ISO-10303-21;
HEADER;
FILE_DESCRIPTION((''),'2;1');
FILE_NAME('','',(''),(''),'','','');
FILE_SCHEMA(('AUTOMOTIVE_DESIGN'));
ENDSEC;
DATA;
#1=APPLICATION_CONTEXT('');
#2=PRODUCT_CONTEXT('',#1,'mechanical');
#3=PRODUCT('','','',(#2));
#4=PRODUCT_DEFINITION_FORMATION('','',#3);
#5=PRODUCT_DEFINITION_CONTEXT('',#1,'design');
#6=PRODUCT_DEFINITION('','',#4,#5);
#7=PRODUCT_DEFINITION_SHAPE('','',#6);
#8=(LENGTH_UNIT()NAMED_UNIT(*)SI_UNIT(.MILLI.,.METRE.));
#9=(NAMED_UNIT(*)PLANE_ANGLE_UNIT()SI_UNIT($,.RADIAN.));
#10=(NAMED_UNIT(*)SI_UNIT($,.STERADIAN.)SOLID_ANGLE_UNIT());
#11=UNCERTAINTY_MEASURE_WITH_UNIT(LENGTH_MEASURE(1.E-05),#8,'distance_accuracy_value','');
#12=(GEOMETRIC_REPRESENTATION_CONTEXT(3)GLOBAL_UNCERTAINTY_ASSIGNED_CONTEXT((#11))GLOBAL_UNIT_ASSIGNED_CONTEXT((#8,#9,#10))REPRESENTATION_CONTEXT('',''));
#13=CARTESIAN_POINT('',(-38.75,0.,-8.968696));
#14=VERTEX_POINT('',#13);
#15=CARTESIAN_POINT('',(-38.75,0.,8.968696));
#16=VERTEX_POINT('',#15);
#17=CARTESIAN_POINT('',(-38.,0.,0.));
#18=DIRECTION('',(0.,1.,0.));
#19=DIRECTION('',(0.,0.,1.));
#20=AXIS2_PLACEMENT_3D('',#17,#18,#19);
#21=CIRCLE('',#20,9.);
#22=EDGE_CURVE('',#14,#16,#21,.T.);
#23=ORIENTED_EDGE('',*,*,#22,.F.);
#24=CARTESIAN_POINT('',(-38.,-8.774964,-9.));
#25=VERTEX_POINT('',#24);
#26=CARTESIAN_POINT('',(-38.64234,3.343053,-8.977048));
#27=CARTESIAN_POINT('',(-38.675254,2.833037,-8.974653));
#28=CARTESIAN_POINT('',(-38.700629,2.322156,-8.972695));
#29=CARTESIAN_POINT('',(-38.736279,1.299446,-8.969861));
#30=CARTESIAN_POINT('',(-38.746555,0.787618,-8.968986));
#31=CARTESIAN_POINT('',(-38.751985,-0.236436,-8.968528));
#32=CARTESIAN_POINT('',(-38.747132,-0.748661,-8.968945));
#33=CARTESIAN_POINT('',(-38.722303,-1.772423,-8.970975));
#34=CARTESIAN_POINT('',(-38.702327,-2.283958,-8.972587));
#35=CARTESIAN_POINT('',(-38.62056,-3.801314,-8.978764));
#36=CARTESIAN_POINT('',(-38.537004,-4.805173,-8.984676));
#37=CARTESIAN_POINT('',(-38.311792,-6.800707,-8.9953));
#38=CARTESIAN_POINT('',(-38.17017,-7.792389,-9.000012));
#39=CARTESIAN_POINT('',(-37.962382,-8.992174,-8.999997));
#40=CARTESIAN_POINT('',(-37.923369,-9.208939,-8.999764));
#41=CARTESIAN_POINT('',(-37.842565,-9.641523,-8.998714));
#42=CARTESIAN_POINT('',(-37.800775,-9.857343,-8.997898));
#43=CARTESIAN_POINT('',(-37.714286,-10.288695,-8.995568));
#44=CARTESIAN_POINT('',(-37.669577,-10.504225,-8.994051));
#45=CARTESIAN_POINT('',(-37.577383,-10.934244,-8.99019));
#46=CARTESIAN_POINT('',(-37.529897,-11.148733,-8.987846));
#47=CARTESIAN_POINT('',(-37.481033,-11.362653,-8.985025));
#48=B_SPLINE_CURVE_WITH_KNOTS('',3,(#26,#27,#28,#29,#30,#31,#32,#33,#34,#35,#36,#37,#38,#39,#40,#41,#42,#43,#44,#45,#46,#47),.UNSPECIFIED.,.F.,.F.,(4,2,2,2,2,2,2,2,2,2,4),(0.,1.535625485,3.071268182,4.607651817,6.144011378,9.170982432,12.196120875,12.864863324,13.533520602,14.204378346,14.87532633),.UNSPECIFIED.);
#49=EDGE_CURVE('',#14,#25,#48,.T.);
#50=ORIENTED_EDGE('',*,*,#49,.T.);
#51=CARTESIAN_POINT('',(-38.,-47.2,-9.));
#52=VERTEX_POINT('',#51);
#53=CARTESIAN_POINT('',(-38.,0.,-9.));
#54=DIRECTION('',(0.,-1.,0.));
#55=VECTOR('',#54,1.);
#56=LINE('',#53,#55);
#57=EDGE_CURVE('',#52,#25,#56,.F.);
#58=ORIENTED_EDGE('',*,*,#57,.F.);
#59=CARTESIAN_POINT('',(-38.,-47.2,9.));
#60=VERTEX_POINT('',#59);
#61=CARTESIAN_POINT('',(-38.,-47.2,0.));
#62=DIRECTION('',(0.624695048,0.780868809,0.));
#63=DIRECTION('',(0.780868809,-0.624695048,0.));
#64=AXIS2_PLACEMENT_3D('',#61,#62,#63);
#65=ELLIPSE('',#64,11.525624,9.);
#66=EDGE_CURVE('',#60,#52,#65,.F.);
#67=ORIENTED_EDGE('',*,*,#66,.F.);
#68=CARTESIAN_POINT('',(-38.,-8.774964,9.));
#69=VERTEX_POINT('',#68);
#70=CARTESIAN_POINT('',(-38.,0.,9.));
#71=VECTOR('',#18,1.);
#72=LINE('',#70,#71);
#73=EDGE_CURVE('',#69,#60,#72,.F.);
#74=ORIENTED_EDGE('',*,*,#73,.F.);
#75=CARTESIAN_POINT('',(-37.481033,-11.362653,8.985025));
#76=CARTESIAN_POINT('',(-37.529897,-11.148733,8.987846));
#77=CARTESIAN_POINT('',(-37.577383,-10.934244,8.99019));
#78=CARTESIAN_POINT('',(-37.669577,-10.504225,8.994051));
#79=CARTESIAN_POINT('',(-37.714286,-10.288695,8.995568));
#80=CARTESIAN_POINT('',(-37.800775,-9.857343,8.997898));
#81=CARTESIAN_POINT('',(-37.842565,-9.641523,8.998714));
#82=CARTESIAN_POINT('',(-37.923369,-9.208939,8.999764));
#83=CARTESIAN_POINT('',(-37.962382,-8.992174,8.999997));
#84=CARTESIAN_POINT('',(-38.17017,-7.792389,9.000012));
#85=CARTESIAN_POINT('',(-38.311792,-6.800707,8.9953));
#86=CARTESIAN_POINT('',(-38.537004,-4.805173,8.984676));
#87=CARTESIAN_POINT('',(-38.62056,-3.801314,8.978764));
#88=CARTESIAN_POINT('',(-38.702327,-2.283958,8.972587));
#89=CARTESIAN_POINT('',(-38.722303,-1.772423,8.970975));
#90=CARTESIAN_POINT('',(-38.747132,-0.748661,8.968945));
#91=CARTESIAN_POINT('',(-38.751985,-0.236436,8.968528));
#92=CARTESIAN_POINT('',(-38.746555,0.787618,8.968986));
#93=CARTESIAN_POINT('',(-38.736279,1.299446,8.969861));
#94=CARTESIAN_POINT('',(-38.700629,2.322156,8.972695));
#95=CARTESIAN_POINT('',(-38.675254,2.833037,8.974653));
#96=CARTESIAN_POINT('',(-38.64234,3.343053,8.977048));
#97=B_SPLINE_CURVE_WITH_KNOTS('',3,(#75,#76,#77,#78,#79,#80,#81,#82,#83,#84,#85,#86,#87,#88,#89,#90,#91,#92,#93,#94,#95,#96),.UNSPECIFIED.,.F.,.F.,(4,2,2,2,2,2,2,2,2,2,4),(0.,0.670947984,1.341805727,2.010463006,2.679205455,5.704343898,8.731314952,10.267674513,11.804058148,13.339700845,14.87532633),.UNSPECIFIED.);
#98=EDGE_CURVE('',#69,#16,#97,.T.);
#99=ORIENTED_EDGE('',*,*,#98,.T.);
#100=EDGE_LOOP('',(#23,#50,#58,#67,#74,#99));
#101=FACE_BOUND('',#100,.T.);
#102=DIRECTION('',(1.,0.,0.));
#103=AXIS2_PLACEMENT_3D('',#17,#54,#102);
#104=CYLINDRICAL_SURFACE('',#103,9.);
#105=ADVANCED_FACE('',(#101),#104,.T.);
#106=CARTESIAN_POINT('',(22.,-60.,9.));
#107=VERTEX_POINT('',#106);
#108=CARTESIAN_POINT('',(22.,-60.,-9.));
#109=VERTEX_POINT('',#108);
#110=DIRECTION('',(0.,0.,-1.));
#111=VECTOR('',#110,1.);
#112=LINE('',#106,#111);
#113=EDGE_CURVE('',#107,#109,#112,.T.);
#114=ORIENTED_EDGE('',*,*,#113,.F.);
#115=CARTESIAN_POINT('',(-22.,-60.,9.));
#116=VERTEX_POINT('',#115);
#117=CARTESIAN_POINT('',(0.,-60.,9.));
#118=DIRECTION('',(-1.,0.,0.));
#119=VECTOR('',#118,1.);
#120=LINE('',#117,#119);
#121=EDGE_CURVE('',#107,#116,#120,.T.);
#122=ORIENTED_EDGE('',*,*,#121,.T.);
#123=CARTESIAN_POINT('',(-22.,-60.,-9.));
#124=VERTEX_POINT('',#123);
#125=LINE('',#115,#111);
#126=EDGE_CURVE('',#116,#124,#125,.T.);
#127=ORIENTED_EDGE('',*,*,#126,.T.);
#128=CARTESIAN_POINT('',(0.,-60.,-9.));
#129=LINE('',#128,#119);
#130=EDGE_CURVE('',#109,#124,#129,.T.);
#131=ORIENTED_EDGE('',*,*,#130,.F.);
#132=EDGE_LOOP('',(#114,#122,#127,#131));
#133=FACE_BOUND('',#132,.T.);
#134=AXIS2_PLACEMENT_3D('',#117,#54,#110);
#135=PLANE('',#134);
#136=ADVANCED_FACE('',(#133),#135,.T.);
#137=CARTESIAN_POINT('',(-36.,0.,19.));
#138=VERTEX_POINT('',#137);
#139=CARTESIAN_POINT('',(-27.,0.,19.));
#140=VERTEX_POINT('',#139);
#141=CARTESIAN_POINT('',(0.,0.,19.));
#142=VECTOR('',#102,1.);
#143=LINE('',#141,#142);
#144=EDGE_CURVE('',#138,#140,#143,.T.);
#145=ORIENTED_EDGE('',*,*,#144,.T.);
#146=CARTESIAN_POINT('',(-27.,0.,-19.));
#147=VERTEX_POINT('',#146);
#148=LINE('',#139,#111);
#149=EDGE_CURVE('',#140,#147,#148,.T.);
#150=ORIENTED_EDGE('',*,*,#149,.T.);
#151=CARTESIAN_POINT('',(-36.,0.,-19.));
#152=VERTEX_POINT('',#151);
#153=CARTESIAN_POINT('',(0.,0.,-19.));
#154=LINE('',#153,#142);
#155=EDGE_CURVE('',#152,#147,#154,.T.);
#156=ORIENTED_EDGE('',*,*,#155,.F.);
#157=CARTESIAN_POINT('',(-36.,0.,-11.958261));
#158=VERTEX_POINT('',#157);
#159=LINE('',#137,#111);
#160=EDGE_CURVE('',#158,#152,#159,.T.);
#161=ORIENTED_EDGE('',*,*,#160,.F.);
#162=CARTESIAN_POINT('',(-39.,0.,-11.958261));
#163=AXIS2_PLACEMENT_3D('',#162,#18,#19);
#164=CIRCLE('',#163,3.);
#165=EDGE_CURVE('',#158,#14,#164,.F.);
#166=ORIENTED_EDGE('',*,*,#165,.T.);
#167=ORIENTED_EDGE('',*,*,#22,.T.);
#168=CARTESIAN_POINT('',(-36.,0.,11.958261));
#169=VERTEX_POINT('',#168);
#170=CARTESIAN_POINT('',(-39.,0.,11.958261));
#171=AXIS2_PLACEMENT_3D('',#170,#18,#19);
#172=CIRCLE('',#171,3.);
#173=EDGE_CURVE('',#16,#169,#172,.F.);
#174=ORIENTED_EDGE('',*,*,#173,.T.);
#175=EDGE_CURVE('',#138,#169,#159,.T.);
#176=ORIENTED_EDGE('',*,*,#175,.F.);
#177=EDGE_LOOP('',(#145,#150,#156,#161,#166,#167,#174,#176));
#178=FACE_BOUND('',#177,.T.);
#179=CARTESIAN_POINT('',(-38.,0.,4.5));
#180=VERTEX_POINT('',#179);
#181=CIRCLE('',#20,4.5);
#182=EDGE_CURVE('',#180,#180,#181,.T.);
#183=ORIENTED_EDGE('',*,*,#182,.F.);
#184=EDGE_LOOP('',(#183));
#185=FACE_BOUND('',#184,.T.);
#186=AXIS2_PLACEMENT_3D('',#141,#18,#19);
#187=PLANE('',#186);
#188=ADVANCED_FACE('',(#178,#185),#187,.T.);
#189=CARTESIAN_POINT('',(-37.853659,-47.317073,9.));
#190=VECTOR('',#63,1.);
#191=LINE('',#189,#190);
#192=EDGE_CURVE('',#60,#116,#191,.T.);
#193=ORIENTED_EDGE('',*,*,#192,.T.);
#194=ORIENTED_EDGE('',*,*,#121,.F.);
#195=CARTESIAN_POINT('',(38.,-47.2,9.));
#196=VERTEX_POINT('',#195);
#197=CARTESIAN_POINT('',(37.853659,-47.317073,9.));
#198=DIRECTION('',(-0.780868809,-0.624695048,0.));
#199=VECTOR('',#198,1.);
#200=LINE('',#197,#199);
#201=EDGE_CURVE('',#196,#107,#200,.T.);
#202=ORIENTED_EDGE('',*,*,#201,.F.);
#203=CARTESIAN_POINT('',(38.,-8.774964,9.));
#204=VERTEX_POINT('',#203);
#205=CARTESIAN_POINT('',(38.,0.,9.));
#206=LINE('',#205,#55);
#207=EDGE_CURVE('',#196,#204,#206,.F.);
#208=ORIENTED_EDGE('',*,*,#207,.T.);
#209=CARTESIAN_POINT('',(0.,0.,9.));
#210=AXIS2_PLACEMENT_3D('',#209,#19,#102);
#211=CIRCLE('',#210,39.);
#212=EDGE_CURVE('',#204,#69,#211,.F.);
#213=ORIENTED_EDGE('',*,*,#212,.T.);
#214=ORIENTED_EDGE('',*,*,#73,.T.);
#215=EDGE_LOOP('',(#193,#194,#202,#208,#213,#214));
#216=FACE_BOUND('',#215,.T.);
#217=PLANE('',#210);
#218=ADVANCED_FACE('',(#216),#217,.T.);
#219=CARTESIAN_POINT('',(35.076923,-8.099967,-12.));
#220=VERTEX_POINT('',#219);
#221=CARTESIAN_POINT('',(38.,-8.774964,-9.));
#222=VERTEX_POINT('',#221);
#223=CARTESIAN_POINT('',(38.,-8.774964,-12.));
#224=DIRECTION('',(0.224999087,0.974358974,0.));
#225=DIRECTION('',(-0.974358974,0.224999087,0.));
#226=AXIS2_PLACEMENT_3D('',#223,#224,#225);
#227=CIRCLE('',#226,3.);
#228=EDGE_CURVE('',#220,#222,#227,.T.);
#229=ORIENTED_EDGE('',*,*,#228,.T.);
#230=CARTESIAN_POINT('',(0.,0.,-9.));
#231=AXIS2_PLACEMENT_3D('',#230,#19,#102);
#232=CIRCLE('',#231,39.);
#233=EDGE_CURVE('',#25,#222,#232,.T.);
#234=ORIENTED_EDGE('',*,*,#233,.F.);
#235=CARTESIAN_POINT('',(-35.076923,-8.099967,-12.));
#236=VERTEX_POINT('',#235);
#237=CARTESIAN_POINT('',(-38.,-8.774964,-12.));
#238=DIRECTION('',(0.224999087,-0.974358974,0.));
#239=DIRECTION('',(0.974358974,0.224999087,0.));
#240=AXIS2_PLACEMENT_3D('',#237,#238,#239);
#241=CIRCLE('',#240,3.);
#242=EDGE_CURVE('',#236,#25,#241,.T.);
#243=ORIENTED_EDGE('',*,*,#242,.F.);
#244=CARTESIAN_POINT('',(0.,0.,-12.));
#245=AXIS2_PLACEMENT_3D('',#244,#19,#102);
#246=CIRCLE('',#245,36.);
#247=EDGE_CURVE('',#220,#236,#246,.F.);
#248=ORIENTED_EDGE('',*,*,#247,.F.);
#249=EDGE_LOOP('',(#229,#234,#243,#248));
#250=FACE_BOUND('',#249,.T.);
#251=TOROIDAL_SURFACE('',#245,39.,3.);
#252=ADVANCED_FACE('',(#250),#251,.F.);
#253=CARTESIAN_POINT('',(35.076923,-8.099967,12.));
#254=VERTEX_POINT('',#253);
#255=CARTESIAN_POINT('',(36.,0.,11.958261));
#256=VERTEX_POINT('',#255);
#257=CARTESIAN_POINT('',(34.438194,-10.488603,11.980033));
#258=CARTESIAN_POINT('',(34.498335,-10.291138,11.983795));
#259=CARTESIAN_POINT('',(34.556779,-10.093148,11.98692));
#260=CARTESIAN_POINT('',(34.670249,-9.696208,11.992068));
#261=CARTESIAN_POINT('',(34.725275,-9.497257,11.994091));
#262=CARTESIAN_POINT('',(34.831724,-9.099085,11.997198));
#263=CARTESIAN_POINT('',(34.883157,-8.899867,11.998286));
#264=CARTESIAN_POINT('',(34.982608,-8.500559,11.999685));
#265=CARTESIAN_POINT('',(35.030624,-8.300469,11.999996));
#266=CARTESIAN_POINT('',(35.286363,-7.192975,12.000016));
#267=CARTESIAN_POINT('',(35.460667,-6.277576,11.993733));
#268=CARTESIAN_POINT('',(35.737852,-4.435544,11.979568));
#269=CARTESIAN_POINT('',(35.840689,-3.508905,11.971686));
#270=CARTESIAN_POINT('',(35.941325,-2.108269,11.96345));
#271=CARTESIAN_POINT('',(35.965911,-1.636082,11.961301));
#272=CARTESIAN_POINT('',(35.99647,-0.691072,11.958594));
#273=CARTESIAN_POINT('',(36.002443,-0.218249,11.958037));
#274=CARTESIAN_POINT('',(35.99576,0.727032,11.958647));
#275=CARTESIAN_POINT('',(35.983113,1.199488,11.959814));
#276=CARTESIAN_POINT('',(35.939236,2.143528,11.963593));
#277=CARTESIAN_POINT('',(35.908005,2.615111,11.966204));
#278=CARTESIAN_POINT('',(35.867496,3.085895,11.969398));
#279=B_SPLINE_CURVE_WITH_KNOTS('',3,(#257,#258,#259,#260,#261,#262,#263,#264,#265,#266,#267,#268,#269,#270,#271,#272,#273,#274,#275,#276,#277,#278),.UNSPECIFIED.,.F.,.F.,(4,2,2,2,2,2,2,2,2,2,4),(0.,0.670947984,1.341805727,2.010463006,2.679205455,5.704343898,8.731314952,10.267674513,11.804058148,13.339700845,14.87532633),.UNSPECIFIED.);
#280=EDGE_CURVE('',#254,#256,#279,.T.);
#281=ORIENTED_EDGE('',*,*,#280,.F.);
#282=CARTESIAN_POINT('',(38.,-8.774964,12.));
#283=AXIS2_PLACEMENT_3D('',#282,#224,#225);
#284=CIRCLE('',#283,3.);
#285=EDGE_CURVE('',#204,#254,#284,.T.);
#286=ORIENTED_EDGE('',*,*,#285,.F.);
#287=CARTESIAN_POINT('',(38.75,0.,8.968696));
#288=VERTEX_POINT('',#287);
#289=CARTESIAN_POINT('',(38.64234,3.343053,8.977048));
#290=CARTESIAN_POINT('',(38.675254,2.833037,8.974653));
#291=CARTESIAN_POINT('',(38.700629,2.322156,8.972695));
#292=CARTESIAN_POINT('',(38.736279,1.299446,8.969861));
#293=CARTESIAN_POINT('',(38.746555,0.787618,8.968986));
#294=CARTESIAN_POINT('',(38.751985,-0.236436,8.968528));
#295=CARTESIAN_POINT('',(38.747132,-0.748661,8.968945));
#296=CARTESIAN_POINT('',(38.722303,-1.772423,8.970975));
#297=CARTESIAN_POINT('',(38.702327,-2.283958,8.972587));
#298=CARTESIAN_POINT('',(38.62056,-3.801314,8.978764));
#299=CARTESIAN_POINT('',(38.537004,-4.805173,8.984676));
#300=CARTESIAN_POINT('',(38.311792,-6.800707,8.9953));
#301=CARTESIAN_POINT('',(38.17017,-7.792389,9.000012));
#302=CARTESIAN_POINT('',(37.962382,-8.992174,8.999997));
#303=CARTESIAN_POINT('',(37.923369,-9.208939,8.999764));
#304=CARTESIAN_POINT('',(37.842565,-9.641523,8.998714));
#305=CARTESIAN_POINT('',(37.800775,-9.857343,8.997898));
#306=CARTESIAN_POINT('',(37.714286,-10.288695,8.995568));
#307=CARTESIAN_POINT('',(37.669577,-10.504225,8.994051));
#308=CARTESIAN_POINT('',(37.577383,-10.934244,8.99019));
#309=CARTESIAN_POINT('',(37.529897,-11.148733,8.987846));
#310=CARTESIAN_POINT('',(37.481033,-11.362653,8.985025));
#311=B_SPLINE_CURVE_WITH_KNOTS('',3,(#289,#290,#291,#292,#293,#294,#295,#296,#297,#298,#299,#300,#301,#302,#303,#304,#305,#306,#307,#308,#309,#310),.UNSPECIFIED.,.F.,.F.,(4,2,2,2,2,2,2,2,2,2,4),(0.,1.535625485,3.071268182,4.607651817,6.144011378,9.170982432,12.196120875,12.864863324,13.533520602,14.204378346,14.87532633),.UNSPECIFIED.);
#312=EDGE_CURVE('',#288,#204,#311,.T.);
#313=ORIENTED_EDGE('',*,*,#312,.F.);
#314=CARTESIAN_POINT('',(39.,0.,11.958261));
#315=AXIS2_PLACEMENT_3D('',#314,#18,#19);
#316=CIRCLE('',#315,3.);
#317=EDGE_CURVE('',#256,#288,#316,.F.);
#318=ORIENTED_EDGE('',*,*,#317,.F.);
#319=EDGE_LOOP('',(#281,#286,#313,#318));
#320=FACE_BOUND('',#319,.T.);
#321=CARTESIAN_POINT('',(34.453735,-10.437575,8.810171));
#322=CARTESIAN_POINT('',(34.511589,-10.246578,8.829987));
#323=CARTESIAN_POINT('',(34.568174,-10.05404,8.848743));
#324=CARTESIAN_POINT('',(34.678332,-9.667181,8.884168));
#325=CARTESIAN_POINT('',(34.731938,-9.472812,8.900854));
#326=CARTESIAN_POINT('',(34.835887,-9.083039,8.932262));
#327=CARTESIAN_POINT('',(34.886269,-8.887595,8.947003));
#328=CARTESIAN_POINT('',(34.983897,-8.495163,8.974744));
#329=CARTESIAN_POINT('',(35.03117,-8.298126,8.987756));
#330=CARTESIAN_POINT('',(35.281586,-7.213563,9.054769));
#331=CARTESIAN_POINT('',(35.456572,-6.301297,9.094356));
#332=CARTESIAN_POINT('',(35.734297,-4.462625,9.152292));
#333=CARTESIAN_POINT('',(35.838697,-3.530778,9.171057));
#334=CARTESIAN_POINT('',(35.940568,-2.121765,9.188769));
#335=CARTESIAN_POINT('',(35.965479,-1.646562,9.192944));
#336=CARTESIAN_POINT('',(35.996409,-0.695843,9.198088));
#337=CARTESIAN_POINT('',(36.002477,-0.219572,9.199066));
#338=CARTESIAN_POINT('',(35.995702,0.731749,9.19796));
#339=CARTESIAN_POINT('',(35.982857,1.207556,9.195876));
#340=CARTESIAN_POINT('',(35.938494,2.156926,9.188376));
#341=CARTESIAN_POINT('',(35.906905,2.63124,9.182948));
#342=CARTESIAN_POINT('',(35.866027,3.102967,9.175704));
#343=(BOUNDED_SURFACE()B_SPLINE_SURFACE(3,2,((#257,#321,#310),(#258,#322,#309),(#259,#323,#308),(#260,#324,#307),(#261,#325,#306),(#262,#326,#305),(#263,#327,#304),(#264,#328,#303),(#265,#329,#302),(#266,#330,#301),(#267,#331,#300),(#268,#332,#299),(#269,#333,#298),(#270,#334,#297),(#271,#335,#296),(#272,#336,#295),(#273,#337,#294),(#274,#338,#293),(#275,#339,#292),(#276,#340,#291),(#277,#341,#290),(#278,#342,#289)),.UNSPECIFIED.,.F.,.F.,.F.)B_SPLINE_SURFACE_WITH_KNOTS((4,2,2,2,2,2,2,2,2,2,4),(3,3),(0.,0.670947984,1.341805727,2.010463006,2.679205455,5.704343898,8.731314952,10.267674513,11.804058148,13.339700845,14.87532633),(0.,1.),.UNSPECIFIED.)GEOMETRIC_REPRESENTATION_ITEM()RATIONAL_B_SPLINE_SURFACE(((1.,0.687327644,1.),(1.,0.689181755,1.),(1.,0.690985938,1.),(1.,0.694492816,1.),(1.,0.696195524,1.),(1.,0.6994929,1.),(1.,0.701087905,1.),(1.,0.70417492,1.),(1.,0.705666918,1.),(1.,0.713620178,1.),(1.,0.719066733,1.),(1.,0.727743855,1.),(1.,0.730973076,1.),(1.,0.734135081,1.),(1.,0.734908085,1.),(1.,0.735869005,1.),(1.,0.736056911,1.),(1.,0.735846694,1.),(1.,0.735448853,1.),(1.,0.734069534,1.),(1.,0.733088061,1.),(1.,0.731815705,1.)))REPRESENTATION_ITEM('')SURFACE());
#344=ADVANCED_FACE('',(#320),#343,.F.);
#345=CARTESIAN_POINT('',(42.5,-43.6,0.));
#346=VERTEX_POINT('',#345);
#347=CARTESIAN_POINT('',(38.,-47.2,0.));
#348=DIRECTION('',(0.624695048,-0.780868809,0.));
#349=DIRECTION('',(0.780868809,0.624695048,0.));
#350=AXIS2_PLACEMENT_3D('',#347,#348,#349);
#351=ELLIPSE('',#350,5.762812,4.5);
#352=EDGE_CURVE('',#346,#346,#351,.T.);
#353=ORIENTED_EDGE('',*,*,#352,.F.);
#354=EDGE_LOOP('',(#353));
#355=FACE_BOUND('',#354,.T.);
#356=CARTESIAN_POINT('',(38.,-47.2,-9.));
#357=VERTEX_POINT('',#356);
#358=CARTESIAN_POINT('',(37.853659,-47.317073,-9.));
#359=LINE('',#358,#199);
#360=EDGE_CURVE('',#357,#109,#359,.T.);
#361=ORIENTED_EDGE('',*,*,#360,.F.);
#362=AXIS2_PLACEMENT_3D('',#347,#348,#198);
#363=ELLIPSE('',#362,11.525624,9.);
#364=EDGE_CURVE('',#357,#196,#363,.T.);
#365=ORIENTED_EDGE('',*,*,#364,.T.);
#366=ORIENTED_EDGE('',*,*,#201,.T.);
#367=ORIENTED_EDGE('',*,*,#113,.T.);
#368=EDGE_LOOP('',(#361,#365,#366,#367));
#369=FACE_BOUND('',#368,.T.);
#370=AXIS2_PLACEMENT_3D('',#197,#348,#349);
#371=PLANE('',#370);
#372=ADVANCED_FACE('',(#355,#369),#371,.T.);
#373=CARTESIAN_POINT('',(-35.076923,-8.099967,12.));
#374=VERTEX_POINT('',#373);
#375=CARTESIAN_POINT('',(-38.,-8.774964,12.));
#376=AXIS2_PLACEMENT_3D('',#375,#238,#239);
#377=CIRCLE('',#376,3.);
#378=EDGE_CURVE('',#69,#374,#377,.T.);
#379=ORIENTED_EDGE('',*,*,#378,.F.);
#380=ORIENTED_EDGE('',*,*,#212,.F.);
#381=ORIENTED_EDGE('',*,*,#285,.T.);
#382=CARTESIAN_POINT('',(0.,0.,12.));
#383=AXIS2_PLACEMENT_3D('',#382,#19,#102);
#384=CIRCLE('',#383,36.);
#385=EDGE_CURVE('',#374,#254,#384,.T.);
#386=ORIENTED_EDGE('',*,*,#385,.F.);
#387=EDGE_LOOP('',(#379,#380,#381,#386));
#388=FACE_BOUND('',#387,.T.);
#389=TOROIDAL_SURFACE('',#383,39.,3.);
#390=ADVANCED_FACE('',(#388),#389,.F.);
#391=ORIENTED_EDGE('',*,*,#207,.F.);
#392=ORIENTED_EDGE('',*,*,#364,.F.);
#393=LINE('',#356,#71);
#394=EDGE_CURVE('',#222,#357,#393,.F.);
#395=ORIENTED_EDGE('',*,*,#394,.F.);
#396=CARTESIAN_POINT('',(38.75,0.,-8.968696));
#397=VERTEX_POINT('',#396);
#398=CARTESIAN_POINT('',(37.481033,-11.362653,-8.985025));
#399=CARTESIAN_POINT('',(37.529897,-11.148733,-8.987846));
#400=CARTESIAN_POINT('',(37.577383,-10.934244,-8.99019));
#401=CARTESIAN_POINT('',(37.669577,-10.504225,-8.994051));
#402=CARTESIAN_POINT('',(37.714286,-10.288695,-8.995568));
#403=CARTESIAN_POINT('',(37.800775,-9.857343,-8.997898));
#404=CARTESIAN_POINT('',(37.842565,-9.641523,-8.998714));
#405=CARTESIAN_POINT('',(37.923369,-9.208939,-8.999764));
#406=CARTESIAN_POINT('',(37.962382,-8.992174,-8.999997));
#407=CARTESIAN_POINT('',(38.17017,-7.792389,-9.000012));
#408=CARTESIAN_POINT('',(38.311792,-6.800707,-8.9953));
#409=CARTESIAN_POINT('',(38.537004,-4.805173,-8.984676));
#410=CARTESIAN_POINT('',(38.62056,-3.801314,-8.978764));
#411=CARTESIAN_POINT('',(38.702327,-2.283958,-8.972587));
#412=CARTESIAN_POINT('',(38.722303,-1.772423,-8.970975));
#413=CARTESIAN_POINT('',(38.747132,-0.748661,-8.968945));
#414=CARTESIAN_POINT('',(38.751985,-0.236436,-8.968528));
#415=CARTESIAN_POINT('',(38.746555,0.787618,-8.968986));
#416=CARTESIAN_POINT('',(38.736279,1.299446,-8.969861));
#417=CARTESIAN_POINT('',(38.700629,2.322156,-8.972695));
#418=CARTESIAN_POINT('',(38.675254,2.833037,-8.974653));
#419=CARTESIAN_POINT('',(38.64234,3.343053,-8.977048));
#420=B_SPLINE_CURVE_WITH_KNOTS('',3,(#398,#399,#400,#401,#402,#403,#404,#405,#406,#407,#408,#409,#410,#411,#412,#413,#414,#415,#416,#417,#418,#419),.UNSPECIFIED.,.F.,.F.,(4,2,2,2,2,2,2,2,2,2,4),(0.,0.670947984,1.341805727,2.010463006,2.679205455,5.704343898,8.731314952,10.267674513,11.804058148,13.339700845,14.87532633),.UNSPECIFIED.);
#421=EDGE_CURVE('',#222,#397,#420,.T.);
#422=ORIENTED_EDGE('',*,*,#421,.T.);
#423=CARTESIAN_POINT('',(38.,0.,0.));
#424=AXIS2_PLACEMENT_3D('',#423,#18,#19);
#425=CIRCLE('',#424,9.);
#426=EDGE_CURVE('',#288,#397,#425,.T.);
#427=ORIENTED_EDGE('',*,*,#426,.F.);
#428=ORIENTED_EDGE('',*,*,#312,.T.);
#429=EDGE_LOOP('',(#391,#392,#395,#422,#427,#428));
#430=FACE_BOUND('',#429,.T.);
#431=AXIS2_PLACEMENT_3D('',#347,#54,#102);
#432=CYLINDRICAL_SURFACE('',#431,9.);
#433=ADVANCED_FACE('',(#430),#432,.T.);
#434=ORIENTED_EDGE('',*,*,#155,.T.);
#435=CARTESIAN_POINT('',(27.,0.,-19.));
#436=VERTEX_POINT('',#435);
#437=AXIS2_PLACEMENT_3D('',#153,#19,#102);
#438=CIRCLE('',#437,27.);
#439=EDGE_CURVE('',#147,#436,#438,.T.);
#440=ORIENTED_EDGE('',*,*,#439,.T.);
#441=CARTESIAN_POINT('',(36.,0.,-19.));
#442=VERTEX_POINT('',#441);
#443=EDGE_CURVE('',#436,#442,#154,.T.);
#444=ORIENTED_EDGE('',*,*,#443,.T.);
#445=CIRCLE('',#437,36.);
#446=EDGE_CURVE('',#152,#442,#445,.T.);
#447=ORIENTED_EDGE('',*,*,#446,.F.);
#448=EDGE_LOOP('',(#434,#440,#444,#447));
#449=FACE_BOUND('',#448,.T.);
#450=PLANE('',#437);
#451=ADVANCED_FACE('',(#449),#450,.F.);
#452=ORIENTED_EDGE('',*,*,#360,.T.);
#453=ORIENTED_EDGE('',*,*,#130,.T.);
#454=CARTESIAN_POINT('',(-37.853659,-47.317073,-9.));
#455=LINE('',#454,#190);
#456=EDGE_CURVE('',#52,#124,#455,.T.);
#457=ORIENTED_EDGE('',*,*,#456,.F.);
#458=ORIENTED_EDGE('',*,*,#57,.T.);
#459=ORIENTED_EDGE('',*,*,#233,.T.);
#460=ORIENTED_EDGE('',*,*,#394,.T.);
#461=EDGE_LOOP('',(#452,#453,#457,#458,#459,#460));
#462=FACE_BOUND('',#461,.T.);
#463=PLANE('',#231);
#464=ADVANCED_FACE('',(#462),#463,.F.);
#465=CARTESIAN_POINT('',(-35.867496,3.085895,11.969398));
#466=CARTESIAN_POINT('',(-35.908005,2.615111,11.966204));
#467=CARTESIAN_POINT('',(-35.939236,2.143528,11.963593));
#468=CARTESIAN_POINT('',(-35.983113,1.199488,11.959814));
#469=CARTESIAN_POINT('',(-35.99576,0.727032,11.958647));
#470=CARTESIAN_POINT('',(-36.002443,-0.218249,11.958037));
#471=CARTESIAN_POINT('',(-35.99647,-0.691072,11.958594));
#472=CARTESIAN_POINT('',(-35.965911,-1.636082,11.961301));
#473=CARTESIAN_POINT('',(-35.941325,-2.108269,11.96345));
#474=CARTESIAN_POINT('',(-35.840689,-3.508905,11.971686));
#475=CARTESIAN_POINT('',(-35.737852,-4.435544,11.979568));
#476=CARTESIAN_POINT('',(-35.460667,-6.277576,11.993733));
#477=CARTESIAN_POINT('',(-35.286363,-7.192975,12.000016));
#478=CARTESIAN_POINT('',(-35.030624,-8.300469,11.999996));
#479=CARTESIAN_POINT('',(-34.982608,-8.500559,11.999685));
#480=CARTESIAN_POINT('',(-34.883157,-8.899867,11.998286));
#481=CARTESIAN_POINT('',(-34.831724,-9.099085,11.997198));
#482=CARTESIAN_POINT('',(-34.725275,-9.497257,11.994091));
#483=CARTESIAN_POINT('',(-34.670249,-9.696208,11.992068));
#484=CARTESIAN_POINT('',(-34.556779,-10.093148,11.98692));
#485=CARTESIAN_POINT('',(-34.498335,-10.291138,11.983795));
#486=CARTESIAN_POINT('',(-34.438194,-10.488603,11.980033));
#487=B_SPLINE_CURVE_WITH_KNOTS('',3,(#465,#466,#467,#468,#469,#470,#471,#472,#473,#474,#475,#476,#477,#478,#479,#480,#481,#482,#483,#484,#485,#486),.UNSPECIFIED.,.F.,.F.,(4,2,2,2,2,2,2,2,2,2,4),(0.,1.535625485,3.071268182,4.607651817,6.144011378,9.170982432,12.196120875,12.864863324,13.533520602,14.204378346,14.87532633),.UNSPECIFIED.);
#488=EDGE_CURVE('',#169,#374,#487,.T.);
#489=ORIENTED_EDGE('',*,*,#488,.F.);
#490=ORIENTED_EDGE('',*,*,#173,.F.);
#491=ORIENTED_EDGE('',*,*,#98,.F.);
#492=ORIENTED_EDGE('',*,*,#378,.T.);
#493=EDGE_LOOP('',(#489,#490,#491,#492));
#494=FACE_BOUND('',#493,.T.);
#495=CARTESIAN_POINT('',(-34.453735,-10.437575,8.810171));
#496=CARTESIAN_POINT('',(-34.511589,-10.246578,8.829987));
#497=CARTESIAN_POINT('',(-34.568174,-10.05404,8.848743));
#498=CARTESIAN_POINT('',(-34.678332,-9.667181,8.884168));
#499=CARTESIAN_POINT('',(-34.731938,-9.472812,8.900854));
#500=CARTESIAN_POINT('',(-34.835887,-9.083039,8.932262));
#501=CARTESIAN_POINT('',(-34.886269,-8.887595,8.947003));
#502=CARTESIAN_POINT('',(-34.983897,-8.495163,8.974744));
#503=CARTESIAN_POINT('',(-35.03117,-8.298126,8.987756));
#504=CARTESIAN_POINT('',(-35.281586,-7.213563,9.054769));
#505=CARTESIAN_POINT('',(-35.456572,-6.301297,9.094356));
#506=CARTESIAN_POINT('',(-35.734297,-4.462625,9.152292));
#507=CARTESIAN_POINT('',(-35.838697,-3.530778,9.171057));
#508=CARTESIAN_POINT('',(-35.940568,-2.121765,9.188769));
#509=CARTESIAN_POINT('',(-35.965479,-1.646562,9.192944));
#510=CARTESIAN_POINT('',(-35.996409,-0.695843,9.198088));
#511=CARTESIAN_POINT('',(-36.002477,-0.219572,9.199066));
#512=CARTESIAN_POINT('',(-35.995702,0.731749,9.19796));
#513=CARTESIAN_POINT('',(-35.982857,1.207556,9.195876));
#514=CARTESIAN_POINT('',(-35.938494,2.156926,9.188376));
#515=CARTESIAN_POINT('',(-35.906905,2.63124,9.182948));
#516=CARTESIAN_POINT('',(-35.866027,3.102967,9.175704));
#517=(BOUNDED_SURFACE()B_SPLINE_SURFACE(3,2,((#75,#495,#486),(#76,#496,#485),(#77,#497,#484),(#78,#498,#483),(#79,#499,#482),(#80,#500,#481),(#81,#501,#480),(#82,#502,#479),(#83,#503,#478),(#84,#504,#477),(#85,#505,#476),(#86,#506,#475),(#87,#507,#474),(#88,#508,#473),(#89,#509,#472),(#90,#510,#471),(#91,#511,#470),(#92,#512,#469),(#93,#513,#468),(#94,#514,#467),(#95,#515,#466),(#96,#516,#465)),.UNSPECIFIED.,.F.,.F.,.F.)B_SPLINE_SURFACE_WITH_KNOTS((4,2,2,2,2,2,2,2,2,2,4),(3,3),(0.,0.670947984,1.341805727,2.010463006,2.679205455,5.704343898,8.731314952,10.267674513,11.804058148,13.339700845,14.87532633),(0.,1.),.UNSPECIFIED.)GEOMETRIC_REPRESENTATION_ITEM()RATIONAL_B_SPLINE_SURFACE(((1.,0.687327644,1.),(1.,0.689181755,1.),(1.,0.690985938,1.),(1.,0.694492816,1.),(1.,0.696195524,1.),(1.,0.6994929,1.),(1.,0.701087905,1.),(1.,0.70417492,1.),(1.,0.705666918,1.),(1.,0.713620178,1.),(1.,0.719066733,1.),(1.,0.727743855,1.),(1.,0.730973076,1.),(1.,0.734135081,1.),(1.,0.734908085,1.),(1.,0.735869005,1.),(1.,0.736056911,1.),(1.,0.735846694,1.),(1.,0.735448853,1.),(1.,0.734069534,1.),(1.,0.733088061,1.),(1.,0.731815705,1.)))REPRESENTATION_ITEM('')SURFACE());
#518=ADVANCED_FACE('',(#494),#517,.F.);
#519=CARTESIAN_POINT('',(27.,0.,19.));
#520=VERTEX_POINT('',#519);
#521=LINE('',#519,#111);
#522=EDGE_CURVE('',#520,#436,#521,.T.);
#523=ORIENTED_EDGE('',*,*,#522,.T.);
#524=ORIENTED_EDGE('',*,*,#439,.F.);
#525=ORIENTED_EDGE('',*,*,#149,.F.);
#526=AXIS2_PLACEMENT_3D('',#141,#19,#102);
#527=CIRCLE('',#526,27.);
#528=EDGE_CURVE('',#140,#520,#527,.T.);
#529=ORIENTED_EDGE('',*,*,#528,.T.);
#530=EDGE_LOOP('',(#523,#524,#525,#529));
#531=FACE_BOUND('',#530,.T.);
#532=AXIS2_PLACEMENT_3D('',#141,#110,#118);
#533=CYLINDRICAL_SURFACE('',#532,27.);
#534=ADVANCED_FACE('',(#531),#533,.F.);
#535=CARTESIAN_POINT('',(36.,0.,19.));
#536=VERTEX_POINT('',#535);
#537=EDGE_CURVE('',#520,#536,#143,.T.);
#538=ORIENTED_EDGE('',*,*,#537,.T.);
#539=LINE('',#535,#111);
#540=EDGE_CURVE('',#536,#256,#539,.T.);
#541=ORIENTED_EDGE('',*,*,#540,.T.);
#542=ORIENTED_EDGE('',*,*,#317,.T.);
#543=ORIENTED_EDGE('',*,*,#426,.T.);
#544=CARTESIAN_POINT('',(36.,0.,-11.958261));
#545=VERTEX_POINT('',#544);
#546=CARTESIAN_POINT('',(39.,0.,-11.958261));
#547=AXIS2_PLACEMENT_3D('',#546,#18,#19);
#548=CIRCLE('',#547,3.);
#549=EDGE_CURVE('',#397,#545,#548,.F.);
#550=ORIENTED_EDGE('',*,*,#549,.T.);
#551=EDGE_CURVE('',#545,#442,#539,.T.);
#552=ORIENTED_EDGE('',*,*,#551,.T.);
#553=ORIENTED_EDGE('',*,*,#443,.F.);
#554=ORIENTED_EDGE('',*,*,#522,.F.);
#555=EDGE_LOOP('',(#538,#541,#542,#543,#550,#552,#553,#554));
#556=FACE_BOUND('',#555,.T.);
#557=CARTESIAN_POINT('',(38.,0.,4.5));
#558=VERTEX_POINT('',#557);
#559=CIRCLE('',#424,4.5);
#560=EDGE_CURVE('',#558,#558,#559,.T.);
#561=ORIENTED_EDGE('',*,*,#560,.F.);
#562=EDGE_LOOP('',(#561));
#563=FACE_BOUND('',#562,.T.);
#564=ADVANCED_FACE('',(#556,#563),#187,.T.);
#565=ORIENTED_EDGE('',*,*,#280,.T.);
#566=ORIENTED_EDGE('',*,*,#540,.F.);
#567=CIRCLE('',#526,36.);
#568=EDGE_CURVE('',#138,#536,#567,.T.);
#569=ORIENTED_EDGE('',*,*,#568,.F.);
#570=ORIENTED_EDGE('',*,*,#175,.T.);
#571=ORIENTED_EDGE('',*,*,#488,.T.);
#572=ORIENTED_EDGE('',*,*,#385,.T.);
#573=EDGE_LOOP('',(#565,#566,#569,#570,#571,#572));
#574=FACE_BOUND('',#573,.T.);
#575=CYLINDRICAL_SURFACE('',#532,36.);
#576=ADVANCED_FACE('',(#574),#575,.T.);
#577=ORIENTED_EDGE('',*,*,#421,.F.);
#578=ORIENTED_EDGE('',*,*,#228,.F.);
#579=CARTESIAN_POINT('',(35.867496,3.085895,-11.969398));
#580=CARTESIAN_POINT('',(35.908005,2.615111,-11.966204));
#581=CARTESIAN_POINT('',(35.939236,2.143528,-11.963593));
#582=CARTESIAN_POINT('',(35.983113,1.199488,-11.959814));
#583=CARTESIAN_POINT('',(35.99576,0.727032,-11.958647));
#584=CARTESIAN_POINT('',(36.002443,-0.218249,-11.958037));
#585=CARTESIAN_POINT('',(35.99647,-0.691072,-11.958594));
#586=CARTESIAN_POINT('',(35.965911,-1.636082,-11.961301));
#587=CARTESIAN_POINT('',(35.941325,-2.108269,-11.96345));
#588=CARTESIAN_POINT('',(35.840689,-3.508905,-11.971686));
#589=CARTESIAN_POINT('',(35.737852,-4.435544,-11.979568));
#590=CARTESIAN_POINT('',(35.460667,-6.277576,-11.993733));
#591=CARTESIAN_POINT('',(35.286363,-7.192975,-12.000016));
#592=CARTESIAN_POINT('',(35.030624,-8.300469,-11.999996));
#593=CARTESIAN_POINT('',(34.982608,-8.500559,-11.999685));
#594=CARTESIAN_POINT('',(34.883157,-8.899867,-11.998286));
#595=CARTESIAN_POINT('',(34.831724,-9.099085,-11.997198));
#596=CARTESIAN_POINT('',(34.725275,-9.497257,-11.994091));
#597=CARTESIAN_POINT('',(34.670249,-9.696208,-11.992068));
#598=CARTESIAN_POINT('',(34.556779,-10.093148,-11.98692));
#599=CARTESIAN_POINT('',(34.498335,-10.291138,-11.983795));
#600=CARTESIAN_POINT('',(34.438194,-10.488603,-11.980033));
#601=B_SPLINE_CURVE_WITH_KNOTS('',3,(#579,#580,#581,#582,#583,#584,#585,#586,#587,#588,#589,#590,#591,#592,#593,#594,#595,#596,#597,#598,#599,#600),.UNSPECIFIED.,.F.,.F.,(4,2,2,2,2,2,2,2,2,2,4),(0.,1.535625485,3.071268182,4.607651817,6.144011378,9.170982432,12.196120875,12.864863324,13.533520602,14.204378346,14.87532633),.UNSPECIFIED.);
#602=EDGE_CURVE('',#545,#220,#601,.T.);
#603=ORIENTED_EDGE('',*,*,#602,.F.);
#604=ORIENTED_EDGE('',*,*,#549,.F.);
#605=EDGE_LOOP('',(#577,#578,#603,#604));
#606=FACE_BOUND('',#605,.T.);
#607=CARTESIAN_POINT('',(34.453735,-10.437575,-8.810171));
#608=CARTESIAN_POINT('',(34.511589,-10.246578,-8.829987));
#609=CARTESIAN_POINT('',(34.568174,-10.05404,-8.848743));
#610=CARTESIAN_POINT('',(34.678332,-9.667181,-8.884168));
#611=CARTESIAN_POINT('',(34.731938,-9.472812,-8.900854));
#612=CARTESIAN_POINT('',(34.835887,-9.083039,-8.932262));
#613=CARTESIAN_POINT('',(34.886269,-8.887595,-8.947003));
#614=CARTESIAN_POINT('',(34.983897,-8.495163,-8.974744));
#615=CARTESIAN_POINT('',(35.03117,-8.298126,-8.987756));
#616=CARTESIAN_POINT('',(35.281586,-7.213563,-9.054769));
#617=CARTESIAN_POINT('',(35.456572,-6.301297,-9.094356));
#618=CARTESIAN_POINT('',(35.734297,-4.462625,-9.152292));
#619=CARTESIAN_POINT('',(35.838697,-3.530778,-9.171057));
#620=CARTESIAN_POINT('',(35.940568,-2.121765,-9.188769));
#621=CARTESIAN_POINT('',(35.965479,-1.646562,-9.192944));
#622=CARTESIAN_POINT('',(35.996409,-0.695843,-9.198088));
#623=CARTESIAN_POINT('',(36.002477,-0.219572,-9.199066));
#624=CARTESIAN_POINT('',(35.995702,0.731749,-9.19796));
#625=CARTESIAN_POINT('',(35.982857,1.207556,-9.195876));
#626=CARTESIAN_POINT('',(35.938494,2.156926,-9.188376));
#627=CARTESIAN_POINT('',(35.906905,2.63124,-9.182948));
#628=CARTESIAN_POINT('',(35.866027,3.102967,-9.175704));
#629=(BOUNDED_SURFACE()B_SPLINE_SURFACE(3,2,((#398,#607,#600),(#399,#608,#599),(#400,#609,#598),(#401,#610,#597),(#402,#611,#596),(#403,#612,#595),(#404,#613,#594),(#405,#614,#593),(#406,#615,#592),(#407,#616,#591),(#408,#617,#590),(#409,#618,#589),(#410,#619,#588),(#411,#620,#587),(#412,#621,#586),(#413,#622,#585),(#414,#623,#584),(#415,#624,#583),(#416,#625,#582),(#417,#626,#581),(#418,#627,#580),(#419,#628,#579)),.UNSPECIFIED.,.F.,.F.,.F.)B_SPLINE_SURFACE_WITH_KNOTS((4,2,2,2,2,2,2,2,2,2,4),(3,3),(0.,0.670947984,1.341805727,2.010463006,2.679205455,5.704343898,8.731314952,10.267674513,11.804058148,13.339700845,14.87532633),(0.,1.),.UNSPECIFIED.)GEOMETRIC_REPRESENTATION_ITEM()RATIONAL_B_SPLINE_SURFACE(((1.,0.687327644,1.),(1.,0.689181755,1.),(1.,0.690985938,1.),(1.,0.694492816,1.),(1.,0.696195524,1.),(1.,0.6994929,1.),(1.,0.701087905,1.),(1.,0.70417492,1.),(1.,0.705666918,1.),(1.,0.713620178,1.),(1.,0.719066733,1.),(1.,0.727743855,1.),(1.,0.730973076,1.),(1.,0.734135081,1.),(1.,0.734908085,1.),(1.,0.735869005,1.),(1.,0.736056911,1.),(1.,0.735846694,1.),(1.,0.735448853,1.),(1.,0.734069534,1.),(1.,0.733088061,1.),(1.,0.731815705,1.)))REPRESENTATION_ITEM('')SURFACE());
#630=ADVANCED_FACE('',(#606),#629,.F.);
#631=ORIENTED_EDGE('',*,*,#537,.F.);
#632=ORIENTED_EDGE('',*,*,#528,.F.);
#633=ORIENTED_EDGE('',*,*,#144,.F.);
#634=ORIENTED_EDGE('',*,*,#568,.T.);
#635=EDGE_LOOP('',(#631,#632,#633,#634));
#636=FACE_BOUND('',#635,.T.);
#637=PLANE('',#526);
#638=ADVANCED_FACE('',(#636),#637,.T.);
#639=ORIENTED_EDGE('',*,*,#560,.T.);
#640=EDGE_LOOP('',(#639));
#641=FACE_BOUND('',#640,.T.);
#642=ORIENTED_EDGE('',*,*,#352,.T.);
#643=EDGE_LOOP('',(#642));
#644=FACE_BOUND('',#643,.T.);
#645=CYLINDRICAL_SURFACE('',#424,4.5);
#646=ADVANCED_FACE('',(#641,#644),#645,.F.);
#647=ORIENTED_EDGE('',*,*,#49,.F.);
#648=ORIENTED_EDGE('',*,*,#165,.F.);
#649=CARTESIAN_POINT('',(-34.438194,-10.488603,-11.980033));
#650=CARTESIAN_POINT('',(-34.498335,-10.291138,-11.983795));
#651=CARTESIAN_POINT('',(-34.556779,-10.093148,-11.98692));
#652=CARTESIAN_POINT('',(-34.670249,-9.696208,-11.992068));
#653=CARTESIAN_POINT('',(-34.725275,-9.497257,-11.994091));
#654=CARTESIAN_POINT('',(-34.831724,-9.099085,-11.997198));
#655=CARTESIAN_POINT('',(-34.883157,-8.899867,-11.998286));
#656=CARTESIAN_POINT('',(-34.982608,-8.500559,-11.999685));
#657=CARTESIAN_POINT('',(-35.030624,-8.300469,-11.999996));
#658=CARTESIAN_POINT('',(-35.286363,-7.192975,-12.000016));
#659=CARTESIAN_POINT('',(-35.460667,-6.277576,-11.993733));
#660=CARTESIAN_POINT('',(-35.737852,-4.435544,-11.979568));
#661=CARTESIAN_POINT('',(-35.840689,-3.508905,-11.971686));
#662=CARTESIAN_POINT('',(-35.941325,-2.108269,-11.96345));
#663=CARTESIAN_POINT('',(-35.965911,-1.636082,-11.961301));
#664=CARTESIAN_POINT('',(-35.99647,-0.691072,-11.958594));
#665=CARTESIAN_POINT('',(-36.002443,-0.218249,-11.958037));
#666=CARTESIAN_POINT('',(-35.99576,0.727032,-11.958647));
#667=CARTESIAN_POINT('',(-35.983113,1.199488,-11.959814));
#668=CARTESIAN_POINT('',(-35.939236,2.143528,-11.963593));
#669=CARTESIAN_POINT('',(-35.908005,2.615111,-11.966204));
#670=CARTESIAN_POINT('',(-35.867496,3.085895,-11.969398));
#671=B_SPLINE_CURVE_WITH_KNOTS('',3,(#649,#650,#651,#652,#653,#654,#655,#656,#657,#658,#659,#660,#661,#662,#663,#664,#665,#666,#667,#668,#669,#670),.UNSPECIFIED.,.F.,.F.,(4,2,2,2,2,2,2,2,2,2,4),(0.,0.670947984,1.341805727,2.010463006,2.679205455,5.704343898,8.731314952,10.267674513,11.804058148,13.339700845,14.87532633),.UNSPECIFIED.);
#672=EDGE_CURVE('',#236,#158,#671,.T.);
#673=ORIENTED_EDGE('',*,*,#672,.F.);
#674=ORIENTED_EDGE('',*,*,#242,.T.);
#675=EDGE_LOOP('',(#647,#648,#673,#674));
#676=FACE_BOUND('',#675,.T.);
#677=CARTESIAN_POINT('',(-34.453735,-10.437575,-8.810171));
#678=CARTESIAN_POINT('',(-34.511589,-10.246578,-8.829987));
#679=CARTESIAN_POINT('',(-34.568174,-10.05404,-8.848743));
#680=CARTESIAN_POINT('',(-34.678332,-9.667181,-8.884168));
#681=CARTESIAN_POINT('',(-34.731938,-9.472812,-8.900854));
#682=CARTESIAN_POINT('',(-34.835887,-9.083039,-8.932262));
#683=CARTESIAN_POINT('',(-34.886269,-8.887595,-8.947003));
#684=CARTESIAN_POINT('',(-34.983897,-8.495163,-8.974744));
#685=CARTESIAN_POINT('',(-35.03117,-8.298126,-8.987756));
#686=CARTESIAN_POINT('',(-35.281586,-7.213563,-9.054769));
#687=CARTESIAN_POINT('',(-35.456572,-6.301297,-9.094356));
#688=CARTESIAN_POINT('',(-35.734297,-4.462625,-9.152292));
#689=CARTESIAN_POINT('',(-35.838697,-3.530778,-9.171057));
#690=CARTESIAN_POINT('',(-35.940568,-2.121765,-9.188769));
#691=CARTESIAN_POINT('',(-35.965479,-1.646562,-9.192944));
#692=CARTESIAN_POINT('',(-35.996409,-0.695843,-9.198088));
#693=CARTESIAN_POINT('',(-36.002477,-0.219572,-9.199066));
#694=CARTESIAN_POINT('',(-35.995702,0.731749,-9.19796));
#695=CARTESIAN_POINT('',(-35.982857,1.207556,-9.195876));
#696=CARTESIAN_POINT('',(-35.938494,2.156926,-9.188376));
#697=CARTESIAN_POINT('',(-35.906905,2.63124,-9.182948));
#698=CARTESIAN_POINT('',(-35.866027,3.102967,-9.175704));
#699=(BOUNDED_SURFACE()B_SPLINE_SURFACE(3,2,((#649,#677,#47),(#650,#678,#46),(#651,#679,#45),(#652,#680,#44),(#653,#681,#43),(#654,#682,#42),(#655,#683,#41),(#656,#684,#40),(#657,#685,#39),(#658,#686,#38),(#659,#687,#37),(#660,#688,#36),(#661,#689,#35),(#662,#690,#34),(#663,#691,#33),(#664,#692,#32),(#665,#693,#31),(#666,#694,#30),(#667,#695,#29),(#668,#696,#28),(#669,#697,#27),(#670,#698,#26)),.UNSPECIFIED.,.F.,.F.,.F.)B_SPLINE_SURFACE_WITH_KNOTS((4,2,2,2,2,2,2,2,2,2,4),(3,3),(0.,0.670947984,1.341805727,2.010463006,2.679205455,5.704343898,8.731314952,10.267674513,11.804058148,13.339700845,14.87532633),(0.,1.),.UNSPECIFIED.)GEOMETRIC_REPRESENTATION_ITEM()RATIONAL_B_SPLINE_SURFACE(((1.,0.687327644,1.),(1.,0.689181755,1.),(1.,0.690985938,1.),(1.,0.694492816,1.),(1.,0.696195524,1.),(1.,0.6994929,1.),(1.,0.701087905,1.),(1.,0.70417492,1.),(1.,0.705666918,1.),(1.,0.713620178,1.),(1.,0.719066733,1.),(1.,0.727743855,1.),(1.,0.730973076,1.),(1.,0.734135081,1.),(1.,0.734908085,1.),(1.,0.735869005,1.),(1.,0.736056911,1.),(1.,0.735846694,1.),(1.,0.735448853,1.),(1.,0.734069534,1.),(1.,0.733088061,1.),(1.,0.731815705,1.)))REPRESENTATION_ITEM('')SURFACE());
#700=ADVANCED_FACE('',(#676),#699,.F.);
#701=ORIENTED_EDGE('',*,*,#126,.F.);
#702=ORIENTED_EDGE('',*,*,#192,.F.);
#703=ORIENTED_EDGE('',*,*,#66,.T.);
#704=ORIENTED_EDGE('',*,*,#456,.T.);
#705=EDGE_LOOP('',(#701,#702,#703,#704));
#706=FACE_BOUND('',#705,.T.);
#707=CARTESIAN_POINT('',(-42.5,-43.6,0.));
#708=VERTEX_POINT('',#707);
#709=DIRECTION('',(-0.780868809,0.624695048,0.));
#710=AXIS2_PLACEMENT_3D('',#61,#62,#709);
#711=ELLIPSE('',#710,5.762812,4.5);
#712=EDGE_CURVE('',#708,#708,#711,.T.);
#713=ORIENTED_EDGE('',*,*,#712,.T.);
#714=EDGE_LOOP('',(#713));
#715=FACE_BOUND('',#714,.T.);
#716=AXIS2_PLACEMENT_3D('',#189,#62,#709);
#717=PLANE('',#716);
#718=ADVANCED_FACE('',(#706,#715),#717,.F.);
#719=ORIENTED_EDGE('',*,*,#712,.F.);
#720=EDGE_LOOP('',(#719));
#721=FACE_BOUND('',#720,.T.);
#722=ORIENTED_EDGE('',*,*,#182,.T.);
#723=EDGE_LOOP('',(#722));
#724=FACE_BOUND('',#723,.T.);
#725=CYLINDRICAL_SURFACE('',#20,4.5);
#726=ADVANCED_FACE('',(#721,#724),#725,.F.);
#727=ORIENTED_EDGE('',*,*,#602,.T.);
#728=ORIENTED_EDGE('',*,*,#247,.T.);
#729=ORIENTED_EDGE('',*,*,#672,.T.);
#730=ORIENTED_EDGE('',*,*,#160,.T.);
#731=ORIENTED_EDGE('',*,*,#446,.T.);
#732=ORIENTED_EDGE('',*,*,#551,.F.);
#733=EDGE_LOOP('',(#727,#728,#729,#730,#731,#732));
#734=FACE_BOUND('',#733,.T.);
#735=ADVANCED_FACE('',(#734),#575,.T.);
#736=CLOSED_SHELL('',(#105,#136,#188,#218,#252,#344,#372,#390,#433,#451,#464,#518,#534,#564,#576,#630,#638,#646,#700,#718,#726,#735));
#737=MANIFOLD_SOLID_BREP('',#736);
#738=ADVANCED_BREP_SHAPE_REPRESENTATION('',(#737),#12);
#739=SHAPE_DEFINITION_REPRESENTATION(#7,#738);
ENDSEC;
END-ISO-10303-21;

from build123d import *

# Parameters (mm, degrees)
BOSS_EXTRUDE1_DEPTH    = 19
BOSS_EXTRUDE2_DEPTH    = 9
FILLET1_START          = -60
FILLET1_DEPTH          = 60
FILLET2_START          = -60
FILLET2_DEPTH          = 60
M10X1_5_TAPPED_HOLE1_D = 9
FILLET3_R              = 3


with BuildPart() as part:
    # Sketch1 → Boss-Extrude1 (new, symmetric)
    with BuildSketch(Plane.XY):
        with BuildLine():
            Line((-27, 0), (-36, 0))
            ThreePointArc((-36, 0), (0, -36), (36, 0))
            Line((36, 0), (27, 0))
            ThreePointArc((27, 0), (0, -27), (-27, 0))
        make_face()
    extrude(amount=BOSS_EXTRUDE1_DEPTH, both=True)

    # Sketch1<3> → Boss-Extrude2 (add, symmetric)
    with BuildSketch(Plane.XY):
        with BuildLine():
            Line((-36, 0), (-47, 0))
            Line((-47, 0), (-47, -40))
            Line((-47, -40), (-22, -60))
            Line((-22, -60), (22, -60))
            Line((22, -60), (47, -40))
            Line((47, -40), (47, 0))
            Line((47, 0), (36, 0))
            ThreePointArc((36, 0), (0, -36), (-36, 0))
        make_face()
    extrude(amount=BOSS_EXTRUDE2_DEPTH, both=True)

    # Fillet1: read off the stored shape, not the designer's step
    # Fillet1 outline → Fillet1 (cut)
    with BuildSketch(Plane(origin=(0, 0, 0), x_dir=(1, 0, 0), z_dir=(0, 1, 0)).offset(FILLET1_START)):
        with BuildLine():
            Line((47, 9), (38, 9))
            ThreePointArc((38, 9), (44.363961031, 6.363961031), (47, 0))
            Line((47, 0), (47, 9))
        make_face()
        with BuildLine():
            Line((47, -9), (47, 0))
            ThreePointArc((47, 0), (44.363961031, -6.363961031), (38, -9))
            Line((38, -9), (47, -9))
        make_face()
    extrude(amount=FILLET1_DEPTH, mode=Mode.SUBTRACT)

    # Fillet2: read off the stored shape, not the designer's step
    # Fillet2 outline → Fillet2 (cut)
    with BuildSketch(Plane(origin=(0, 0, 0), x_dir=(1, 0, 0), z_dir=(0, 1, 0)).offset(FILLET2_START)):
        with BuildLine():
            Line((-47, -9), (-38, -9))
            ThreePointArc((-38, -9), (-44.363961031, -6.363961031), (-47, 0))
            Line((-47, 0), (-47, -9))
        make_face()
        with BuildLine():
            Line((-47, 9), (-47, 0))
            ThreePointArc((-47, 0), (-44.363961031, 6.363961031), (-38, 9))
            Line((-38, 9), (-47, 9))
        make_face()
    extrude(amount=FILLET2_DEPTH, mode=Mode.SUBTRACT)

    # M10x1.5 Tapped Hole1 (through all)
    with Locations(Plane(origin=(-38, 0, 0), x_dir=(0, 0, 1), z_dir=(0, 1, 0))):
        with Locations((0, 0), (0, 76)):
            Hole(M10X1_5_TAPPED_HOLE1_D / 2)

    # Fillet3
    fillet3_edges = [part.edges().sort_by_distance(p)[0] for p in [
        (0, -36, -9),
        (0, -36, 9),
    ]]
    fillet(fillet3_edges, radius=FILLET3_R)


solid = part.part
